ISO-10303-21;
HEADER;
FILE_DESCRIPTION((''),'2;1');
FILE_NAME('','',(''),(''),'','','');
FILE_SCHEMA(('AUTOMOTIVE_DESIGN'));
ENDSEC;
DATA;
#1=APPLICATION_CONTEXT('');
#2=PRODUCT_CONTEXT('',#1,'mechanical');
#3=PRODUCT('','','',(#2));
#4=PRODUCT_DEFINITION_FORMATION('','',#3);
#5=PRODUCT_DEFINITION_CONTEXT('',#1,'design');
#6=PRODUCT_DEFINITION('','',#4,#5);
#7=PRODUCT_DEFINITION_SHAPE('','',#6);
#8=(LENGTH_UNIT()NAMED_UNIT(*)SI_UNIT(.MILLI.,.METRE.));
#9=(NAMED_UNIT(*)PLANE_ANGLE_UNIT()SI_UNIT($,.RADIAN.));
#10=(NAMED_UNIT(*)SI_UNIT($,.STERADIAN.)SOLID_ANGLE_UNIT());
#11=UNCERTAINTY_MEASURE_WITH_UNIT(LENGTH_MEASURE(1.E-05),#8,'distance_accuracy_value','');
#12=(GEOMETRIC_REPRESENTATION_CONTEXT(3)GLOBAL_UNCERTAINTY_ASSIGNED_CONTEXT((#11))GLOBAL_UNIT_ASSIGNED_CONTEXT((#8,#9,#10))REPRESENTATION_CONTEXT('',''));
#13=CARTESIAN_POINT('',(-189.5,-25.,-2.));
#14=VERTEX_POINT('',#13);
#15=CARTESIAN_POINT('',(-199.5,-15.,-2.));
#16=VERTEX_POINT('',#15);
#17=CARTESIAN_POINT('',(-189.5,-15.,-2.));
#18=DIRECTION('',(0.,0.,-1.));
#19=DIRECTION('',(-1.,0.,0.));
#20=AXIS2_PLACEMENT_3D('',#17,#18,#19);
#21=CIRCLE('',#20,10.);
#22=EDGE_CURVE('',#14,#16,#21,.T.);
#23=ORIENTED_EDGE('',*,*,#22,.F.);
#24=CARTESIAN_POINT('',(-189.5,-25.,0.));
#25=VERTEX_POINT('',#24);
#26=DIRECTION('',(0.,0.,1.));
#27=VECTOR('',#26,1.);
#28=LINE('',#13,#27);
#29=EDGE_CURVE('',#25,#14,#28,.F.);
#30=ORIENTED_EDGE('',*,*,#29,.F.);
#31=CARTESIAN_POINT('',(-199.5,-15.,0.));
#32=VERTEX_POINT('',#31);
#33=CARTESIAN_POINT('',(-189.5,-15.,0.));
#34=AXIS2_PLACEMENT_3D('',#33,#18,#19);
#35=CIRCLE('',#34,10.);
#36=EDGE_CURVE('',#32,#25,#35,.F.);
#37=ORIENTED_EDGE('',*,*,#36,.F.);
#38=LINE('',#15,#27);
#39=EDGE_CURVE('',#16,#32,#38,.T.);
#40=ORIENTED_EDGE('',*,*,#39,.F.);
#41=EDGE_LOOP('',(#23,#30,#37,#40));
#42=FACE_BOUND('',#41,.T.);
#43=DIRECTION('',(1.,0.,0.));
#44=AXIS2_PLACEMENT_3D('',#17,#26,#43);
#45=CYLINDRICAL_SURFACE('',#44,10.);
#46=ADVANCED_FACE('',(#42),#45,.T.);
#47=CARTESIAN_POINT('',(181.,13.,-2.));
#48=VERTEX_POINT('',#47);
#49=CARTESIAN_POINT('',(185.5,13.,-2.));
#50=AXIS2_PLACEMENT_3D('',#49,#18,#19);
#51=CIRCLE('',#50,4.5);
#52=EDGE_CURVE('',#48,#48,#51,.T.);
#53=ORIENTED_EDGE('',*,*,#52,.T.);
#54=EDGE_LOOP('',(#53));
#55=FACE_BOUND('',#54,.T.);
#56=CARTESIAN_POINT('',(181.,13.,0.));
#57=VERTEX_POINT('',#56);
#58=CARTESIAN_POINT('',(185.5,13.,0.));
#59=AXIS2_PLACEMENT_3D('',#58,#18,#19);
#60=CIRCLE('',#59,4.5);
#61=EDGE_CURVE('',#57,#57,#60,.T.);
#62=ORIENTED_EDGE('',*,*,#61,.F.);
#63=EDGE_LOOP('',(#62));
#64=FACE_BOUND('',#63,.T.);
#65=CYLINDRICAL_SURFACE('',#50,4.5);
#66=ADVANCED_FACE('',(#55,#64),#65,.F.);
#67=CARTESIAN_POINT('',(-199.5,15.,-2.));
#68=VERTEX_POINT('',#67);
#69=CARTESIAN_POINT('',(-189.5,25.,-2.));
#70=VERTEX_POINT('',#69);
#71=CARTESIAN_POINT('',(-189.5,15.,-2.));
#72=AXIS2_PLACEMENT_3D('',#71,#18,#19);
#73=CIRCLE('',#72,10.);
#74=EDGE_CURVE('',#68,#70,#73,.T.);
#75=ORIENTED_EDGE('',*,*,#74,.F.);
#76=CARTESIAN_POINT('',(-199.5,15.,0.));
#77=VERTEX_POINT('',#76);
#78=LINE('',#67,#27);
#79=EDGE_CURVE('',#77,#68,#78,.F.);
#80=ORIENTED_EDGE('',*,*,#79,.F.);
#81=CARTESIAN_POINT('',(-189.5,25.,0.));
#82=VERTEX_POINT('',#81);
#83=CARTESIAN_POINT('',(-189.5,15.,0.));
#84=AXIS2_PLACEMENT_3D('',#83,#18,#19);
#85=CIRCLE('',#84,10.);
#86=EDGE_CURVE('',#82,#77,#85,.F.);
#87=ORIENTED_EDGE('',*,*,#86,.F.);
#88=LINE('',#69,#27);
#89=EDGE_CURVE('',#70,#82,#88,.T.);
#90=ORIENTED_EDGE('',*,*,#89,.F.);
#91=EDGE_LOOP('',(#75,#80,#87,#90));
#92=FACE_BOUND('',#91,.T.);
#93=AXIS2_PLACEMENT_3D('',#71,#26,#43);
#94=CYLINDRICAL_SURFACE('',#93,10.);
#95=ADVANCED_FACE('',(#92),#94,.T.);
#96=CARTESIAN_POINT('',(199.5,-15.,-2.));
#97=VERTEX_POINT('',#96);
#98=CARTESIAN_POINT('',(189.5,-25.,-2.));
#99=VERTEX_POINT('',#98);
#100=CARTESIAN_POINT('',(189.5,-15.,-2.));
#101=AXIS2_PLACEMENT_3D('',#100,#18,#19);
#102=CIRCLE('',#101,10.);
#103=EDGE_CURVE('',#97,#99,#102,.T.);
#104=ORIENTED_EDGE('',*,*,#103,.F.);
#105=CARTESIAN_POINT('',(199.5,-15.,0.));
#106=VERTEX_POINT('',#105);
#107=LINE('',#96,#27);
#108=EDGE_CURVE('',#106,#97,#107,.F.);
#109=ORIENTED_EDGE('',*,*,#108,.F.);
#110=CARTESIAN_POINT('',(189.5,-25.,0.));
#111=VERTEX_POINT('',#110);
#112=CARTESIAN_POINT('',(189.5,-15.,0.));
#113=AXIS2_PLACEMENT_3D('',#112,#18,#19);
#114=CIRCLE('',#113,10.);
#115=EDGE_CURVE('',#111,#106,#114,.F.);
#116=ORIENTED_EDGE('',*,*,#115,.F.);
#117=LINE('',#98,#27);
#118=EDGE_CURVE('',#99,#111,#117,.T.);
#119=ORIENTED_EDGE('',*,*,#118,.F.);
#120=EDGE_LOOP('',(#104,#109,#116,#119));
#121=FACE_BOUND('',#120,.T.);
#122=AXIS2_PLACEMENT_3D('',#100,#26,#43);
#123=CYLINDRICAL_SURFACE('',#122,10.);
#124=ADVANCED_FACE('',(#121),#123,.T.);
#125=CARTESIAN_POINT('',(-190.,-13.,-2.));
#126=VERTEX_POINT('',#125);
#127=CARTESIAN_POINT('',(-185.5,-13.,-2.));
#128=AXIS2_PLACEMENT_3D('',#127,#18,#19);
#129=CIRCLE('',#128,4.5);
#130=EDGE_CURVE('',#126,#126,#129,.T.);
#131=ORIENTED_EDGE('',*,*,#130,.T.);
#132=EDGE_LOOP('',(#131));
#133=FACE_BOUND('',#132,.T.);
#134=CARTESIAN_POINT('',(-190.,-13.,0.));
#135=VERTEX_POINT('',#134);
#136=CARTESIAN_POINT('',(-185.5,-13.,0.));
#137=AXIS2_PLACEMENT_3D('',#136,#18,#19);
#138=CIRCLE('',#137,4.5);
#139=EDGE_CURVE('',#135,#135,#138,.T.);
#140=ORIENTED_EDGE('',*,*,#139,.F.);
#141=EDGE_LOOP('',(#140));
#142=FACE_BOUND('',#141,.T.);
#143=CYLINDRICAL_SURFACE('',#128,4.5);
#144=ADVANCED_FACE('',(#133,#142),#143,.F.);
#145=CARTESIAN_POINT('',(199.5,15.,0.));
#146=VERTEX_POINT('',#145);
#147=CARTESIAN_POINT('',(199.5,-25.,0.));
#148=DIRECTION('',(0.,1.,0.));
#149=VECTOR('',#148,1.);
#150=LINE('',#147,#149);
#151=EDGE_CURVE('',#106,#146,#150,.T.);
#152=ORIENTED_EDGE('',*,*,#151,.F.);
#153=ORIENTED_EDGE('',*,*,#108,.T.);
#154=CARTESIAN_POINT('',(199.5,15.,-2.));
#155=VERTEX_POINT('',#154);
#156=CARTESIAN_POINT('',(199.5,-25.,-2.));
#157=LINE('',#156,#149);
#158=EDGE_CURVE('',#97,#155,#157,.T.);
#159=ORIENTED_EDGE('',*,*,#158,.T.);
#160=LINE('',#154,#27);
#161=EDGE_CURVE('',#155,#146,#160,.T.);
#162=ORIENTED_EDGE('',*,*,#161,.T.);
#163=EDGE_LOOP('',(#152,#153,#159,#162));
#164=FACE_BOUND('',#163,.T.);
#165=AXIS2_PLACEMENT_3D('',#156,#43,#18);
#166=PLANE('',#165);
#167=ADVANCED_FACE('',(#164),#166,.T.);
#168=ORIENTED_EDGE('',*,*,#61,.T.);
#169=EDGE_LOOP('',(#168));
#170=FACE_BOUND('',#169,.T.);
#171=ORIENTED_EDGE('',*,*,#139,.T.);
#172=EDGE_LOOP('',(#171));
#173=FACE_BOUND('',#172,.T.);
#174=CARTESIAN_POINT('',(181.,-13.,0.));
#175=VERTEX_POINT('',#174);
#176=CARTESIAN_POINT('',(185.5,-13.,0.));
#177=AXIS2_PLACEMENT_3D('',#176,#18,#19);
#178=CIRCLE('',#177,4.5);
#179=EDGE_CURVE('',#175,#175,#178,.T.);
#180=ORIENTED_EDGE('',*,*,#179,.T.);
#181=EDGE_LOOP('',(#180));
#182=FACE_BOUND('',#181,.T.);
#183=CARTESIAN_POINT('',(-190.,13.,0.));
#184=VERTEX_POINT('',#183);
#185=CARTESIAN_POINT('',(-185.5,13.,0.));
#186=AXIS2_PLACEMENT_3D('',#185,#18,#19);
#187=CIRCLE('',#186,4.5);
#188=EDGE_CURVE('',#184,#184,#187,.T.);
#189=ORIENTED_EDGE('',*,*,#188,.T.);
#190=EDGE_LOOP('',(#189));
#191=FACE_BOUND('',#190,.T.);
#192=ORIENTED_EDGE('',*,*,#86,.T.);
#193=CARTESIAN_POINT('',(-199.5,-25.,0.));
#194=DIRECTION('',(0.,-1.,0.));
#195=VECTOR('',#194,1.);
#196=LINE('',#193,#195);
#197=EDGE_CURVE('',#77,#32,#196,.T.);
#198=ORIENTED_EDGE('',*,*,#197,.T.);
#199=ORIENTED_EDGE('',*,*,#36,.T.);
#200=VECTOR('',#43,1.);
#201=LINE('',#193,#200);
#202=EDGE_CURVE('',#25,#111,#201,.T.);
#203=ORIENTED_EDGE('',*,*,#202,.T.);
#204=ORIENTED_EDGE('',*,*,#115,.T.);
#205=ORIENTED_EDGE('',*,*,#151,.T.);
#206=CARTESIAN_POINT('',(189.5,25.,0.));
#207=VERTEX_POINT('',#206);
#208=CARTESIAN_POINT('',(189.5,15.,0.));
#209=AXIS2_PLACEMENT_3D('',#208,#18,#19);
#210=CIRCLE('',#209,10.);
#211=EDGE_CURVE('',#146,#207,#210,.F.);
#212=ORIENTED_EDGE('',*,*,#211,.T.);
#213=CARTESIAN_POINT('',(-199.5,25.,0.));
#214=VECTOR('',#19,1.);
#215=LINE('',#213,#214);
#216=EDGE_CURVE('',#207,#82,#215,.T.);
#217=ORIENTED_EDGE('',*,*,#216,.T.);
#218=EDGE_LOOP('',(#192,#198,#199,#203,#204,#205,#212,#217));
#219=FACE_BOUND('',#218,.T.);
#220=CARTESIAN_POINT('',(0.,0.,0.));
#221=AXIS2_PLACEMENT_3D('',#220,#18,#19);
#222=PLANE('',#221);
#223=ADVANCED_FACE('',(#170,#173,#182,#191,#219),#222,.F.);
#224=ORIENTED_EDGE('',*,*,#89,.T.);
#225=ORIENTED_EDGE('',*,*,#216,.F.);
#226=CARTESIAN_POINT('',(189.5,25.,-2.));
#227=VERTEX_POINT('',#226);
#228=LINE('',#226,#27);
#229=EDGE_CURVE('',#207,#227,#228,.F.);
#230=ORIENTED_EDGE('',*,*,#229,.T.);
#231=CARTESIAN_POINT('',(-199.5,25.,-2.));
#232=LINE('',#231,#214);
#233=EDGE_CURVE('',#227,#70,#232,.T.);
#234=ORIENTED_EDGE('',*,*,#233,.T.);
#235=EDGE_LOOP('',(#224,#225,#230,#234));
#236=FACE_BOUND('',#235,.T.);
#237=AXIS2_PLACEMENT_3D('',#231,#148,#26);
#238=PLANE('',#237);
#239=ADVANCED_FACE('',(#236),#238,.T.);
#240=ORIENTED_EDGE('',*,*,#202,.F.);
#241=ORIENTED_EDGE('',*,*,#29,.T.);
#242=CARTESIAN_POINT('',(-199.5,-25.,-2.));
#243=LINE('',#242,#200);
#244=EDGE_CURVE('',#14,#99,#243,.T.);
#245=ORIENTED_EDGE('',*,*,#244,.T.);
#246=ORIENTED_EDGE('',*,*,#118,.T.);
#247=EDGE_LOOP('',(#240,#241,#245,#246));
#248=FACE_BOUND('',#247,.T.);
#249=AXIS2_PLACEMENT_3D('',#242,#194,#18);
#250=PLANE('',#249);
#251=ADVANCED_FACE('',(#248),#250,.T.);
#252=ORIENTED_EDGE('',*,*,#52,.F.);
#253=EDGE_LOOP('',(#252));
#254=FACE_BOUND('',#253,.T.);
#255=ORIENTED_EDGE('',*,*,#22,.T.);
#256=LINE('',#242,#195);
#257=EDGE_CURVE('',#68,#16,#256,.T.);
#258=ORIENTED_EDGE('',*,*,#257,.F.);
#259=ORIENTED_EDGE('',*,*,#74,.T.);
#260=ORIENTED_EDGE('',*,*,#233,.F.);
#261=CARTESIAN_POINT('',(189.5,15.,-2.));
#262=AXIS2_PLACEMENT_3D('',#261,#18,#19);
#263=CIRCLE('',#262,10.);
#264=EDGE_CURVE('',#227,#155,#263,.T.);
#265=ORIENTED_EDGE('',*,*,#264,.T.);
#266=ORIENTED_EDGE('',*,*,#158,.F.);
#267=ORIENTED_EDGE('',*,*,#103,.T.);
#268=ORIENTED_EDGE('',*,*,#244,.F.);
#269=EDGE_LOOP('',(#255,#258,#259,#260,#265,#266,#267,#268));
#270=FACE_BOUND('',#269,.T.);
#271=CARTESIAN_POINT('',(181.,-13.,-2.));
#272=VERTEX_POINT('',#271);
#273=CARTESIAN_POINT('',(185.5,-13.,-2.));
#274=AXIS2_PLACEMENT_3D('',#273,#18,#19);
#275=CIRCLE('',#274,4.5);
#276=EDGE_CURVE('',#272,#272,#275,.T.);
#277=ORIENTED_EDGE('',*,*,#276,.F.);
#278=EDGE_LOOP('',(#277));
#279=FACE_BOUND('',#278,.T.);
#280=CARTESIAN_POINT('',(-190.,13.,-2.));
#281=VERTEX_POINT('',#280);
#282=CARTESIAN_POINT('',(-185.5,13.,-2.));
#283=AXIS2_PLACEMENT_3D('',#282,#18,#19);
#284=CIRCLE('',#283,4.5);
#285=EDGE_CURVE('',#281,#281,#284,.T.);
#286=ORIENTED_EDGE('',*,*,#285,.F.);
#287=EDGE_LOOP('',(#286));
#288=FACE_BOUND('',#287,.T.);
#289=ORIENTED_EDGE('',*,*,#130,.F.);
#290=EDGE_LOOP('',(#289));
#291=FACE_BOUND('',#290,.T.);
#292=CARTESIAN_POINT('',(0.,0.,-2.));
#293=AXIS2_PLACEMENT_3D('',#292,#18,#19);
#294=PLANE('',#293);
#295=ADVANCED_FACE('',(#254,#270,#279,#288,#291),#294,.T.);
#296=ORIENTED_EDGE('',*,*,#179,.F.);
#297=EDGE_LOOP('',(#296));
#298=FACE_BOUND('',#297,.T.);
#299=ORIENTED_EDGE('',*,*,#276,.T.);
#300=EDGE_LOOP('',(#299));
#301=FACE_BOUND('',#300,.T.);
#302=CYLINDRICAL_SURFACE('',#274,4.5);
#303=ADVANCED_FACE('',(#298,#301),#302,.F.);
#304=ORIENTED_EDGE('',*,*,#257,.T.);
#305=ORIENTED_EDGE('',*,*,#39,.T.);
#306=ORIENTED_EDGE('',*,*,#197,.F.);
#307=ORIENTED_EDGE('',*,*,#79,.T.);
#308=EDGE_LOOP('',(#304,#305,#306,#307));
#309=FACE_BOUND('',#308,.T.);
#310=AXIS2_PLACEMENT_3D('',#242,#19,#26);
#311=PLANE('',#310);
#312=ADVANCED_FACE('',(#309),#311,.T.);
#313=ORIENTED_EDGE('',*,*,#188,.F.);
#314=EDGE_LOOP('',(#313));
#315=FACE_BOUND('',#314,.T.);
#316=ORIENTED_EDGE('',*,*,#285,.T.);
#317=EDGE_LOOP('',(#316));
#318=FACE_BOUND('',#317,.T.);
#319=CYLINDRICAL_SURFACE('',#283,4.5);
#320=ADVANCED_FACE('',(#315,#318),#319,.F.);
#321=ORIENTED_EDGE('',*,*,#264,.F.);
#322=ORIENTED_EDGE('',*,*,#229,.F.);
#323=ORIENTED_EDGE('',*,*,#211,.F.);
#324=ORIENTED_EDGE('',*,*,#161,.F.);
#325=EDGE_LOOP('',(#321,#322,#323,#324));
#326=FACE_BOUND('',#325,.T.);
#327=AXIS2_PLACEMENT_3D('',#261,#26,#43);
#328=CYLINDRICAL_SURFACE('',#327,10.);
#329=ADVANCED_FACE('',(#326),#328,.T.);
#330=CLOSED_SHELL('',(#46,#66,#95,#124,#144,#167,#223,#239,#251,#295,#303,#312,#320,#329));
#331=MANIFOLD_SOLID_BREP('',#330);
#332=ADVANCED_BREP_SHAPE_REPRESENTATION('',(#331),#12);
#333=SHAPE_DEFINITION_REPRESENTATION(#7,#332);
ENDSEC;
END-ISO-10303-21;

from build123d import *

# Parameters (mm, degrees)
SKETCH1_W            = 399
SKETCH1_H            = 50
BASE_FLANGE1_DEPTH   = 2
FILLET1_R            = 10
M8_CLEARANCE_HOLE1_D = 9


# Sheet-metal steps are written as plain solids
with BuildPart() as part:
    # Sketch1 → Base-Flange1 (new body)
    with BuildSketch(Plane.XY):
        Rectangle(SKETCH1_W, SKETCH1_H)
    extrude(amount=-BASE_FLANGE1_DEPTH)

    # Fillet1
    fillet1_edges = [part.edges().sort_by_distance(p)[0] for p in [
        (199.5, -25, -1),
        (-199.5, -25, -1),
        (-199.5, 25, -1),
        (199.5, 25, -1),
    ]]
    fillet(fillet1_edges, radius=FILLET1_R)

    # M8 Clearance Hole1 (through all)
    with Locations(Plane(origin=(0, 0, -2), x_dir=(-1, 0, 0), z_dir=(0, 0, -1))):
        with Locations((-185.5, 13), (-185.5, -13)):
            m8_clearance_hole1 = Hole(M8_CLEARANCE_HOLE1_D / 2)

    # Mirror1: M8 Clearance Hole1 across plane
    add(m8_clearance_hole1.mirror(Plane(origin=(0, 0, 0), x_dir=(0, 0, 1), z_dir=(1, 0, 0))), mode=Mode.SUBTRACT)


solid = part.part
